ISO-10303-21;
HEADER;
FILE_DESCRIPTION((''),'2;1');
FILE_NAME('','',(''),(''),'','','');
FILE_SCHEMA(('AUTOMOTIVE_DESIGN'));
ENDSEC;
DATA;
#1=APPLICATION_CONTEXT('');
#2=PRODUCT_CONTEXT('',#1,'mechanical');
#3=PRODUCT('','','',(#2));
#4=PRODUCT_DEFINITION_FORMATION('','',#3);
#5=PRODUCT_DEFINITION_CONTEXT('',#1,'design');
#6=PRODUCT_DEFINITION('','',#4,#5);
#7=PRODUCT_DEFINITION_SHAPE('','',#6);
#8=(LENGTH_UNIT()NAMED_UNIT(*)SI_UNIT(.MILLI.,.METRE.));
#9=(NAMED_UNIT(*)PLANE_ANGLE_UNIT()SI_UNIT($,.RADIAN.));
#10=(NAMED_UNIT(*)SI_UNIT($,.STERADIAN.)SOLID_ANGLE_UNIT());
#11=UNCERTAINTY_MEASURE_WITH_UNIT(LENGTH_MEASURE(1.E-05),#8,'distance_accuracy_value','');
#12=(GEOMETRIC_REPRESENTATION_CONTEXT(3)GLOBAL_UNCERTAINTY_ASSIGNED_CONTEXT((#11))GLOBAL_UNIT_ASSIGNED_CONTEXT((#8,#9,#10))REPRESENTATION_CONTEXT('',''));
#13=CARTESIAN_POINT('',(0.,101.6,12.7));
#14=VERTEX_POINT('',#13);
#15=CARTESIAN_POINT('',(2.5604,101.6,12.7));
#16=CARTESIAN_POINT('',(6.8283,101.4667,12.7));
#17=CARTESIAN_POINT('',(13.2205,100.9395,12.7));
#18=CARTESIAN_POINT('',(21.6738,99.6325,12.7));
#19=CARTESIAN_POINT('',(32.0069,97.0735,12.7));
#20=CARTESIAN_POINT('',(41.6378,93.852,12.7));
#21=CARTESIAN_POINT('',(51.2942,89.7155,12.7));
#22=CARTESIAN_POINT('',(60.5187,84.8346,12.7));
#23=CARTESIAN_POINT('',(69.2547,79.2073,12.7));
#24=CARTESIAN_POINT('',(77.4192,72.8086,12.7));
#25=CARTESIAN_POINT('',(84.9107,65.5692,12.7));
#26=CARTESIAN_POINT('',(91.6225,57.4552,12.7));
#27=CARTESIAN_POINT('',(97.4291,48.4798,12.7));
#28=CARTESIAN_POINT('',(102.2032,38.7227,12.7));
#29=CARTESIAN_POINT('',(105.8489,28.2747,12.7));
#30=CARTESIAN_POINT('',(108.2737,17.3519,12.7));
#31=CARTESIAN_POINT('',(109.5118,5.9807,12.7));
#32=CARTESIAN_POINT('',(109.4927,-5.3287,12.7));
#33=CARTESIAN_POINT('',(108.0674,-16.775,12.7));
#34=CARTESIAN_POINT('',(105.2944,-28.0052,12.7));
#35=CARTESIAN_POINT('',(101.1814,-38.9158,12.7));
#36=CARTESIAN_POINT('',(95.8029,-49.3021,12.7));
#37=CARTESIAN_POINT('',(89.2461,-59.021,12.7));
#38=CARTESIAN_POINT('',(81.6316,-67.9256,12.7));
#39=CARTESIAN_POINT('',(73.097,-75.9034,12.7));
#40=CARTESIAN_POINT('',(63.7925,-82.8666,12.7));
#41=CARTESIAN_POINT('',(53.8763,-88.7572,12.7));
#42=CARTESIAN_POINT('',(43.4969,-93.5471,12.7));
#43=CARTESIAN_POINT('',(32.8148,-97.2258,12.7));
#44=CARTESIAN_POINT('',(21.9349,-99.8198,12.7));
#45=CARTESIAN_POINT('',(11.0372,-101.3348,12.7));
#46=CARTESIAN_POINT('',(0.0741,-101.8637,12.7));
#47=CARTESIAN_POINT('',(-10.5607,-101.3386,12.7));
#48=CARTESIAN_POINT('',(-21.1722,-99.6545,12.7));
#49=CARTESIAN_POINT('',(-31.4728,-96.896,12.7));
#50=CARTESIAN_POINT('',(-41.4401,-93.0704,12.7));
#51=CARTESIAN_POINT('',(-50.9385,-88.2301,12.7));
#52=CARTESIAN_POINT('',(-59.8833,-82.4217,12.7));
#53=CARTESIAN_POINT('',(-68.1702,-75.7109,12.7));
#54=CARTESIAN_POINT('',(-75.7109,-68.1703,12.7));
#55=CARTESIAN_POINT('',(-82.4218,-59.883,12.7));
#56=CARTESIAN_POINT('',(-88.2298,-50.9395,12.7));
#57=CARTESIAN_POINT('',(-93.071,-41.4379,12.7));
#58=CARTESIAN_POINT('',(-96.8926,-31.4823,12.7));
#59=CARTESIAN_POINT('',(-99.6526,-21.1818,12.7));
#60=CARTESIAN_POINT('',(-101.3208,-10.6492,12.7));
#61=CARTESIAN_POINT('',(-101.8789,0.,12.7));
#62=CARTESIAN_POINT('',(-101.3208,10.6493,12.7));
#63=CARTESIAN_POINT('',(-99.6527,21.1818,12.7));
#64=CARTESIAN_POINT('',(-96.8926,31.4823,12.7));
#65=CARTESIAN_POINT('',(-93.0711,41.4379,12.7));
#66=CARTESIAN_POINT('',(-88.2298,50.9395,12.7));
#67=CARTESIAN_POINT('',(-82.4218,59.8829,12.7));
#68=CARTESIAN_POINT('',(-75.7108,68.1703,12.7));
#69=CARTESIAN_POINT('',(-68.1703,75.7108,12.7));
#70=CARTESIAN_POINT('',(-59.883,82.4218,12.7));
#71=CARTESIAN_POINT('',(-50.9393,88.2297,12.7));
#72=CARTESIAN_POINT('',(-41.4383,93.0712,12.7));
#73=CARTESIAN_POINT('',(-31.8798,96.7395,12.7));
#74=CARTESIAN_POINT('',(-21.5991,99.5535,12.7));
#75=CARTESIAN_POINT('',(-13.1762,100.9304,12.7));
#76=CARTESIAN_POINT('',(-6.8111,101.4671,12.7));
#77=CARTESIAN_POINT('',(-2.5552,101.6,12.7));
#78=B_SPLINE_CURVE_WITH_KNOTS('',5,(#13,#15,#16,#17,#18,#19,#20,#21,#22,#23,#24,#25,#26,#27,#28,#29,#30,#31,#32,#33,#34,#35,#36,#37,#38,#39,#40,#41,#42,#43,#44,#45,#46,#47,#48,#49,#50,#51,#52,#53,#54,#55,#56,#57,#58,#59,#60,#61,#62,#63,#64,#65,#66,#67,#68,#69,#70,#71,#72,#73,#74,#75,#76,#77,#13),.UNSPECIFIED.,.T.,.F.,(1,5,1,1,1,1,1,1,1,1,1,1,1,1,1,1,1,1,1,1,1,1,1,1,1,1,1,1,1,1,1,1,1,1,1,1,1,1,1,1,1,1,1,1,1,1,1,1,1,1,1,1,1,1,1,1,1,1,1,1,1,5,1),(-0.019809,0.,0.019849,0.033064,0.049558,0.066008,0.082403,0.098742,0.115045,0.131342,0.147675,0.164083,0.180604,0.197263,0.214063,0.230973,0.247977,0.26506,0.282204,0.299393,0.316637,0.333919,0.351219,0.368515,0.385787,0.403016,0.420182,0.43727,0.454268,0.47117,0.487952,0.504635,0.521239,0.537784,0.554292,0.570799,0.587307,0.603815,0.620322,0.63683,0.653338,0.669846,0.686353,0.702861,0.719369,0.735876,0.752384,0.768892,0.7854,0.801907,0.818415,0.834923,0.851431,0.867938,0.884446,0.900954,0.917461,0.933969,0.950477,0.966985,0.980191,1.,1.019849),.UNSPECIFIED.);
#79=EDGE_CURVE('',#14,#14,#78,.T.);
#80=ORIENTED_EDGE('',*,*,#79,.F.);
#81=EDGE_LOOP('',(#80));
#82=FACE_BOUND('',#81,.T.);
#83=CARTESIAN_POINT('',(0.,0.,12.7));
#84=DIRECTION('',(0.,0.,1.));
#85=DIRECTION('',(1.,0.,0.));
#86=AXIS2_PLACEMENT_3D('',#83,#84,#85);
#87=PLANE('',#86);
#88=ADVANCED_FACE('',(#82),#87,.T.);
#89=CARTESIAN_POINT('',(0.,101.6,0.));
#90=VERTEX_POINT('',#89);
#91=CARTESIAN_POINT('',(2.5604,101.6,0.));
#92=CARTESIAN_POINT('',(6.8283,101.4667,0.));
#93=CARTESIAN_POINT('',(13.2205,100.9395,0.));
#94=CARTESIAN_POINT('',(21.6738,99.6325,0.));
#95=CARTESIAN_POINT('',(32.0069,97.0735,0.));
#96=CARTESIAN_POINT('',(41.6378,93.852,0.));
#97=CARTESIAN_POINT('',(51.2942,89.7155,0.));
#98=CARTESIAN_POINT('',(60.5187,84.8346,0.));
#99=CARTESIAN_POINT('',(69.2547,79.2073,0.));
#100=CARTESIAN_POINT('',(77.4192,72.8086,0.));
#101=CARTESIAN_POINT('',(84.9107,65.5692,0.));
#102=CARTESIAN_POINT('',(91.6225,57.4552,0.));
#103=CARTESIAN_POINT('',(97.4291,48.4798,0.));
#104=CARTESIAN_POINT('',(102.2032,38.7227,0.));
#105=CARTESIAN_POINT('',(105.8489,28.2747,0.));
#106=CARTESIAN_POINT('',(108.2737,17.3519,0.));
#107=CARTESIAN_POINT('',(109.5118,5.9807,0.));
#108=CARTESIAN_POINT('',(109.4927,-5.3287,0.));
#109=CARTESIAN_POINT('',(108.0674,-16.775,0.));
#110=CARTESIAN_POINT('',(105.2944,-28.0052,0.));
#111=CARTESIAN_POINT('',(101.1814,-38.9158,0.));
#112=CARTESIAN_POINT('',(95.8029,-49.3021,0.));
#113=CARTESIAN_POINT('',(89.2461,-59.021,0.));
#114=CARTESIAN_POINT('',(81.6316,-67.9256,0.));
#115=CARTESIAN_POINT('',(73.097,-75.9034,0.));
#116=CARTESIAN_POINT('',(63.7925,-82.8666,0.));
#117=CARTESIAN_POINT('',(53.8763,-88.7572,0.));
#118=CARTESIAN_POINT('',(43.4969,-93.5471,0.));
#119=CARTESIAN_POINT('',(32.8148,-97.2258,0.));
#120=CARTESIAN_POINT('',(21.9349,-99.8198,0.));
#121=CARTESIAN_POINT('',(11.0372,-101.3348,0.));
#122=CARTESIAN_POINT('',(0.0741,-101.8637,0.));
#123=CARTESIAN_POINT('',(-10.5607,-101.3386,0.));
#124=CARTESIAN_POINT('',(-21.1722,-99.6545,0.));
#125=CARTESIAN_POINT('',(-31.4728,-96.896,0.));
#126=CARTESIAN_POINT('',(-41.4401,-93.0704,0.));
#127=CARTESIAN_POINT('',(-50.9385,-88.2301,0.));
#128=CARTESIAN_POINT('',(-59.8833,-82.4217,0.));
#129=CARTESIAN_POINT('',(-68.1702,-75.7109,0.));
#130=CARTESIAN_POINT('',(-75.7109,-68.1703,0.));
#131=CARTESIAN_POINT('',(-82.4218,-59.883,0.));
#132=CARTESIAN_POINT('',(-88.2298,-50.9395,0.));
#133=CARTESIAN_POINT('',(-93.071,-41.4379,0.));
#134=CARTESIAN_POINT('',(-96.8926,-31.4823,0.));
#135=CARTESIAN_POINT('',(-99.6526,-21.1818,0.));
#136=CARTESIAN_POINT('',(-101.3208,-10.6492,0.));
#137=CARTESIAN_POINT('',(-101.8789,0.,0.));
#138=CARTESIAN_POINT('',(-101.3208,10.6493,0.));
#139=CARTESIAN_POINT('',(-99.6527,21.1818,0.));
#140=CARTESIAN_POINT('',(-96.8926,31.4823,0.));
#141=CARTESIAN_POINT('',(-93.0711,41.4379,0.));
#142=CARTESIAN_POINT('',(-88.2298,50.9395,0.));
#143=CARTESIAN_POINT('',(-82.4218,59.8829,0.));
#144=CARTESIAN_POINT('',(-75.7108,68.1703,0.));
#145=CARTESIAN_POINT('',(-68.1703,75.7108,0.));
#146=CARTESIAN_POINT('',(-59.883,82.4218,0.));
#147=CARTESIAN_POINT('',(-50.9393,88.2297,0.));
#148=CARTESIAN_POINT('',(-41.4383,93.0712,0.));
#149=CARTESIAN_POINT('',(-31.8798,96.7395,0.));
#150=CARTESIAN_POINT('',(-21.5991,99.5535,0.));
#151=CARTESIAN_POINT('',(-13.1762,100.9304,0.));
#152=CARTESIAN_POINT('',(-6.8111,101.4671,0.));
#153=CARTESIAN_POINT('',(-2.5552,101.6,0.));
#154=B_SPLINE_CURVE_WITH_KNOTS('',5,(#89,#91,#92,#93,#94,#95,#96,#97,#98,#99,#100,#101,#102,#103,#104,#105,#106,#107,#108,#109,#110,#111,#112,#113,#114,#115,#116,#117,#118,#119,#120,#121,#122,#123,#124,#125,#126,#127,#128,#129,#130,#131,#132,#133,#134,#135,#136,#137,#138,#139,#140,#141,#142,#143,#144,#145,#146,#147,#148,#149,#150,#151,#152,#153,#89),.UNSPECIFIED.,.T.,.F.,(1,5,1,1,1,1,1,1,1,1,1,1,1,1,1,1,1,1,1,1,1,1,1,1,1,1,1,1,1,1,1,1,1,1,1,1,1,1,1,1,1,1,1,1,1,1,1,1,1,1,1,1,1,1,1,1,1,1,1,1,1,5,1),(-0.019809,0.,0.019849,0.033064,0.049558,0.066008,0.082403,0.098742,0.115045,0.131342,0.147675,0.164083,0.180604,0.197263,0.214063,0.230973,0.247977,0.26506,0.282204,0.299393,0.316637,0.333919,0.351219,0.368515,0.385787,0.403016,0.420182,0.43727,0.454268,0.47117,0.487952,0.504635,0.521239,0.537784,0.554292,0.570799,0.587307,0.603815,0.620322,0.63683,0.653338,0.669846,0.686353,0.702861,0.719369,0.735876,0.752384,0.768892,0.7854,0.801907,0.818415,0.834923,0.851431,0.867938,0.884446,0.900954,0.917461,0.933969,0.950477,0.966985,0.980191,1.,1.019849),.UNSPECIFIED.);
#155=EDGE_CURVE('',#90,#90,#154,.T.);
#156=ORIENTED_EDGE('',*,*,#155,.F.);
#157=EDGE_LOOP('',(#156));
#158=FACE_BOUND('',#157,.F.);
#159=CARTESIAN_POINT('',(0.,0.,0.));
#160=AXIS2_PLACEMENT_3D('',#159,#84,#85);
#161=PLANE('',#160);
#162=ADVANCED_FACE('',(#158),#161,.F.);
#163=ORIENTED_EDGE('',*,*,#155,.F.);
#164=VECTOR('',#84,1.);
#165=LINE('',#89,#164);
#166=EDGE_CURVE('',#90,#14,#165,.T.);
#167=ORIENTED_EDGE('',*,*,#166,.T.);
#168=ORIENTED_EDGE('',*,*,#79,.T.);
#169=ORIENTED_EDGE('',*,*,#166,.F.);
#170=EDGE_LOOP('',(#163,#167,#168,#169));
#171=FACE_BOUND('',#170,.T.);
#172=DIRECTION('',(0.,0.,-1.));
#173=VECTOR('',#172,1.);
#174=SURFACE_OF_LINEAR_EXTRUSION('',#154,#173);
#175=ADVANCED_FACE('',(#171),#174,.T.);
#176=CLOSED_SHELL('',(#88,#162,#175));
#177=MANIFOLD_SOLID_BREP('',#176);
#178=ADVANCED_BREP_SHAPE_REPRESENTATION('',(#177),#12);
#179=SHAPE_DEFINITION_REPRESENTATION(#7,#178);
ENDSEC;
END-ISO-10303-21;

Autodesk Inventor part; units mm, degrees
ref_plane "YZ Plane" through (0, 0, 0) normal (1, 0, 0) x (0, 1, 0)
ref_plane "XZ Plane" through (0, 0, 0) normal (0, 1, 0) x (-1, 0, 0)
ref_plane "XY Plane" through (0, 0, 0) normal (0, 0, 1) x (1, 0, 0)
sketch "Main Sketch" plane through (0, 0, 0) normal (0, 0, 1) x (1, 0, 0)
  spline S0 degree 5 poles (0, 101.6) (2.5604, 101.6) (6.8283, 101.4667) (13.2205, 100.9395) (21.6738, 99.6325) (32.0069, 97.0735) (41.6378, 93.852) (51.2942, 89.7155) (60.5187, 84.8346) (69.2547, 79.2073) (77.4192, 72.8086) (84.9107, 65.5692) (91.6225, 57.4552) (97.4291, 48.4798) (102.2032, 38.7227) (105.8489, 28.2747) (108.2737, 17.3519) (109.5118, 5.9807) (109.4927, -5.3287) (108.0674, -16.775) (105.2944, -28.0052) (101.1814, -38.9158) (95.8029, -49.3021) (89.2461, -59.021) (81.6316, -67.9256) (73.097, -75.9034) (63.7925, -82.8666) (53.8763, -88.7572) (43.4969, -93.5471) (32.8148, -97.2258) (21.9349, -99.8198) (11.0372, -101.3348) (0.0741, -101.8637) (-10.5607, -101.3386) (-21.1722, -99.6545) (-31.4728, -96.896) (-41.4401, -93.0704) (-50.9385, -88.2301) (-59.8833, -82.4217) (-68.1702, -75.7109) (-75.7109, -68.1703) (-82.4218, -59.883) (-88.2298, -50.9395) (-93.071, -41.4379) (-96.8926, -31.4823) (-99.6526, -21.1818) (-101.3208, -10.6492) (-101.8789, 0) (-101.3208, 10.6493) (-99.6527, 21.1818) (-96.8926, 31.4823) (-93.0711, 41.4379) (-88.2298, 50.9395) (-82.4218, 59.8829) (-75.7108, 68.1703) (-68.1703, 75.7108) (-59.883, 82.4218) (-50.9393, 88.2297) (-41.4383, 93.0712) (-31.8798, 96.7395) (-21.5991, 99.5535) (-13.1762, 100.9304) (-6.8111, 101.4671) (-2.5552, 101.6) (0, 101.6) knots 0 0 0 0 0 0 0.019849 0.033064 0.049558 0.066008 0.082403 0.098742 0.115045 0.131342 0.147675 0.164083 0.180604 0.197263 0.214063 0.230973 0.247977 0.26506 0.282204 0.299393 0.316637 0.333919 0.351219 0.368515 0.385787 0.403016 0.420182 0.43727 0.454268 0.47117 0.487952 0.504635 0.521239 0.537784 0.554292 0.570799 0.587307 0.603815 0.620322 0.63683 0.653338 0.669846 0.686353 0.702861 0.719369 0.735876 0.752384 0.768892 0.7854 0.801907 0.818415 0.834923 0.851431 0.867938 0.884446 0.900954 0.917461 0.933969 0.950477 0.966985 0.980191 1 1 1 1 1 1
  point P0 (21.2395, 99.4841)
  point P1 (31.5928, 96.9786)
  point P2 (41.6219, 93.6268)
  point P3 (51.2582, 89.4948)
  point P4 (60.4455, 84.6194)
  point P5 (69.124, 79.0058)
  point P6 (77.2162, 72.6296)
  point P7 (84.6384, 65.4353)
  point P8 (91.2961, 57.3777)
  point P9 (97.0714, 48.4613)
  point P10 (101.8404, 38.7439)
  point P11 (105.4932, 28.3342)
  point P12 (107.9528, 17.3833)
  point P13 (109.1924, 6.0686)
  point P14 (109.1485, -5.2665)
  point P15 (107.7467, -16.632)
  point P16 (104.9835, -27.8482)
  point P17 (100.888, -38.7333)
  point P18 (95.5222, -49.1116)
  point P19 (88.9787, -58.8213)
  point P20 (81.3759, -67.7206)
  point P21 (72.8527, -75.6931)
  point P22 (63.5605, -82.6513)
  point P23 (53.6561, -88.5369)
  point P24 (43.2946, -93.3201)
  point P25 (32.6227, -96.996)
  point P26 (21.7739, -99.5799)
  point P27 (10.8661, -101.1018)
  point P28 (0, -101.6)
  point P29 (-10.6201, -101.0434)
  point P30 (-21.1238, -99.3798)
  point P31 (-31.3961, -96.6273)
  point P32 (-41.3244, -92.8162)
  point P33 (-50.8, -87.9882)
  point P34 (-59.719, -82.1961)
  point P35 (-67.9837, -75.5035)
  point P36 (-75.5035, -67.9837)
  point P37 (-82.1961, -59.719)
  point P38 (-87.9882, -50.8)
  point P39 (-92.8162, -41.3244)
  point P40 (-96.6273, -31.3961)
  point P41 (-99.3798, -21.1238)
  point P42 (-101.0434, -10.6201)
  point P43 (-101.6, 0)
  point P44 (-101.0434, 10.6201)
  point P45 (-99.3798, 21.1238)
  point P46 (-96.6273, 31.3961)
  point P47 (-92.8162, 41.3244)
  point P48 (-87.9882, 50.8)
  point P49 (-82.1961, 59.719)
  point P50 (-75.5035, 67.9837)
  point P51 (-67.9837, 75.5035)
  point P52 (-59.719, 82.1961)
  point P53 (-50.8, 87.9882)
  point P54 (-41.3244, 92.8162)
  point P55 (-31.3961, 96.6273)
  point P56 (-21.1238, 99.3798)
  point P57 (-10.6201, 101.0434)
extrude "Cam" add sketch "Main Sketch" along normal blind 12.7
properties part number "Disc Cam" material "Stainless Steel, Austenitic"
